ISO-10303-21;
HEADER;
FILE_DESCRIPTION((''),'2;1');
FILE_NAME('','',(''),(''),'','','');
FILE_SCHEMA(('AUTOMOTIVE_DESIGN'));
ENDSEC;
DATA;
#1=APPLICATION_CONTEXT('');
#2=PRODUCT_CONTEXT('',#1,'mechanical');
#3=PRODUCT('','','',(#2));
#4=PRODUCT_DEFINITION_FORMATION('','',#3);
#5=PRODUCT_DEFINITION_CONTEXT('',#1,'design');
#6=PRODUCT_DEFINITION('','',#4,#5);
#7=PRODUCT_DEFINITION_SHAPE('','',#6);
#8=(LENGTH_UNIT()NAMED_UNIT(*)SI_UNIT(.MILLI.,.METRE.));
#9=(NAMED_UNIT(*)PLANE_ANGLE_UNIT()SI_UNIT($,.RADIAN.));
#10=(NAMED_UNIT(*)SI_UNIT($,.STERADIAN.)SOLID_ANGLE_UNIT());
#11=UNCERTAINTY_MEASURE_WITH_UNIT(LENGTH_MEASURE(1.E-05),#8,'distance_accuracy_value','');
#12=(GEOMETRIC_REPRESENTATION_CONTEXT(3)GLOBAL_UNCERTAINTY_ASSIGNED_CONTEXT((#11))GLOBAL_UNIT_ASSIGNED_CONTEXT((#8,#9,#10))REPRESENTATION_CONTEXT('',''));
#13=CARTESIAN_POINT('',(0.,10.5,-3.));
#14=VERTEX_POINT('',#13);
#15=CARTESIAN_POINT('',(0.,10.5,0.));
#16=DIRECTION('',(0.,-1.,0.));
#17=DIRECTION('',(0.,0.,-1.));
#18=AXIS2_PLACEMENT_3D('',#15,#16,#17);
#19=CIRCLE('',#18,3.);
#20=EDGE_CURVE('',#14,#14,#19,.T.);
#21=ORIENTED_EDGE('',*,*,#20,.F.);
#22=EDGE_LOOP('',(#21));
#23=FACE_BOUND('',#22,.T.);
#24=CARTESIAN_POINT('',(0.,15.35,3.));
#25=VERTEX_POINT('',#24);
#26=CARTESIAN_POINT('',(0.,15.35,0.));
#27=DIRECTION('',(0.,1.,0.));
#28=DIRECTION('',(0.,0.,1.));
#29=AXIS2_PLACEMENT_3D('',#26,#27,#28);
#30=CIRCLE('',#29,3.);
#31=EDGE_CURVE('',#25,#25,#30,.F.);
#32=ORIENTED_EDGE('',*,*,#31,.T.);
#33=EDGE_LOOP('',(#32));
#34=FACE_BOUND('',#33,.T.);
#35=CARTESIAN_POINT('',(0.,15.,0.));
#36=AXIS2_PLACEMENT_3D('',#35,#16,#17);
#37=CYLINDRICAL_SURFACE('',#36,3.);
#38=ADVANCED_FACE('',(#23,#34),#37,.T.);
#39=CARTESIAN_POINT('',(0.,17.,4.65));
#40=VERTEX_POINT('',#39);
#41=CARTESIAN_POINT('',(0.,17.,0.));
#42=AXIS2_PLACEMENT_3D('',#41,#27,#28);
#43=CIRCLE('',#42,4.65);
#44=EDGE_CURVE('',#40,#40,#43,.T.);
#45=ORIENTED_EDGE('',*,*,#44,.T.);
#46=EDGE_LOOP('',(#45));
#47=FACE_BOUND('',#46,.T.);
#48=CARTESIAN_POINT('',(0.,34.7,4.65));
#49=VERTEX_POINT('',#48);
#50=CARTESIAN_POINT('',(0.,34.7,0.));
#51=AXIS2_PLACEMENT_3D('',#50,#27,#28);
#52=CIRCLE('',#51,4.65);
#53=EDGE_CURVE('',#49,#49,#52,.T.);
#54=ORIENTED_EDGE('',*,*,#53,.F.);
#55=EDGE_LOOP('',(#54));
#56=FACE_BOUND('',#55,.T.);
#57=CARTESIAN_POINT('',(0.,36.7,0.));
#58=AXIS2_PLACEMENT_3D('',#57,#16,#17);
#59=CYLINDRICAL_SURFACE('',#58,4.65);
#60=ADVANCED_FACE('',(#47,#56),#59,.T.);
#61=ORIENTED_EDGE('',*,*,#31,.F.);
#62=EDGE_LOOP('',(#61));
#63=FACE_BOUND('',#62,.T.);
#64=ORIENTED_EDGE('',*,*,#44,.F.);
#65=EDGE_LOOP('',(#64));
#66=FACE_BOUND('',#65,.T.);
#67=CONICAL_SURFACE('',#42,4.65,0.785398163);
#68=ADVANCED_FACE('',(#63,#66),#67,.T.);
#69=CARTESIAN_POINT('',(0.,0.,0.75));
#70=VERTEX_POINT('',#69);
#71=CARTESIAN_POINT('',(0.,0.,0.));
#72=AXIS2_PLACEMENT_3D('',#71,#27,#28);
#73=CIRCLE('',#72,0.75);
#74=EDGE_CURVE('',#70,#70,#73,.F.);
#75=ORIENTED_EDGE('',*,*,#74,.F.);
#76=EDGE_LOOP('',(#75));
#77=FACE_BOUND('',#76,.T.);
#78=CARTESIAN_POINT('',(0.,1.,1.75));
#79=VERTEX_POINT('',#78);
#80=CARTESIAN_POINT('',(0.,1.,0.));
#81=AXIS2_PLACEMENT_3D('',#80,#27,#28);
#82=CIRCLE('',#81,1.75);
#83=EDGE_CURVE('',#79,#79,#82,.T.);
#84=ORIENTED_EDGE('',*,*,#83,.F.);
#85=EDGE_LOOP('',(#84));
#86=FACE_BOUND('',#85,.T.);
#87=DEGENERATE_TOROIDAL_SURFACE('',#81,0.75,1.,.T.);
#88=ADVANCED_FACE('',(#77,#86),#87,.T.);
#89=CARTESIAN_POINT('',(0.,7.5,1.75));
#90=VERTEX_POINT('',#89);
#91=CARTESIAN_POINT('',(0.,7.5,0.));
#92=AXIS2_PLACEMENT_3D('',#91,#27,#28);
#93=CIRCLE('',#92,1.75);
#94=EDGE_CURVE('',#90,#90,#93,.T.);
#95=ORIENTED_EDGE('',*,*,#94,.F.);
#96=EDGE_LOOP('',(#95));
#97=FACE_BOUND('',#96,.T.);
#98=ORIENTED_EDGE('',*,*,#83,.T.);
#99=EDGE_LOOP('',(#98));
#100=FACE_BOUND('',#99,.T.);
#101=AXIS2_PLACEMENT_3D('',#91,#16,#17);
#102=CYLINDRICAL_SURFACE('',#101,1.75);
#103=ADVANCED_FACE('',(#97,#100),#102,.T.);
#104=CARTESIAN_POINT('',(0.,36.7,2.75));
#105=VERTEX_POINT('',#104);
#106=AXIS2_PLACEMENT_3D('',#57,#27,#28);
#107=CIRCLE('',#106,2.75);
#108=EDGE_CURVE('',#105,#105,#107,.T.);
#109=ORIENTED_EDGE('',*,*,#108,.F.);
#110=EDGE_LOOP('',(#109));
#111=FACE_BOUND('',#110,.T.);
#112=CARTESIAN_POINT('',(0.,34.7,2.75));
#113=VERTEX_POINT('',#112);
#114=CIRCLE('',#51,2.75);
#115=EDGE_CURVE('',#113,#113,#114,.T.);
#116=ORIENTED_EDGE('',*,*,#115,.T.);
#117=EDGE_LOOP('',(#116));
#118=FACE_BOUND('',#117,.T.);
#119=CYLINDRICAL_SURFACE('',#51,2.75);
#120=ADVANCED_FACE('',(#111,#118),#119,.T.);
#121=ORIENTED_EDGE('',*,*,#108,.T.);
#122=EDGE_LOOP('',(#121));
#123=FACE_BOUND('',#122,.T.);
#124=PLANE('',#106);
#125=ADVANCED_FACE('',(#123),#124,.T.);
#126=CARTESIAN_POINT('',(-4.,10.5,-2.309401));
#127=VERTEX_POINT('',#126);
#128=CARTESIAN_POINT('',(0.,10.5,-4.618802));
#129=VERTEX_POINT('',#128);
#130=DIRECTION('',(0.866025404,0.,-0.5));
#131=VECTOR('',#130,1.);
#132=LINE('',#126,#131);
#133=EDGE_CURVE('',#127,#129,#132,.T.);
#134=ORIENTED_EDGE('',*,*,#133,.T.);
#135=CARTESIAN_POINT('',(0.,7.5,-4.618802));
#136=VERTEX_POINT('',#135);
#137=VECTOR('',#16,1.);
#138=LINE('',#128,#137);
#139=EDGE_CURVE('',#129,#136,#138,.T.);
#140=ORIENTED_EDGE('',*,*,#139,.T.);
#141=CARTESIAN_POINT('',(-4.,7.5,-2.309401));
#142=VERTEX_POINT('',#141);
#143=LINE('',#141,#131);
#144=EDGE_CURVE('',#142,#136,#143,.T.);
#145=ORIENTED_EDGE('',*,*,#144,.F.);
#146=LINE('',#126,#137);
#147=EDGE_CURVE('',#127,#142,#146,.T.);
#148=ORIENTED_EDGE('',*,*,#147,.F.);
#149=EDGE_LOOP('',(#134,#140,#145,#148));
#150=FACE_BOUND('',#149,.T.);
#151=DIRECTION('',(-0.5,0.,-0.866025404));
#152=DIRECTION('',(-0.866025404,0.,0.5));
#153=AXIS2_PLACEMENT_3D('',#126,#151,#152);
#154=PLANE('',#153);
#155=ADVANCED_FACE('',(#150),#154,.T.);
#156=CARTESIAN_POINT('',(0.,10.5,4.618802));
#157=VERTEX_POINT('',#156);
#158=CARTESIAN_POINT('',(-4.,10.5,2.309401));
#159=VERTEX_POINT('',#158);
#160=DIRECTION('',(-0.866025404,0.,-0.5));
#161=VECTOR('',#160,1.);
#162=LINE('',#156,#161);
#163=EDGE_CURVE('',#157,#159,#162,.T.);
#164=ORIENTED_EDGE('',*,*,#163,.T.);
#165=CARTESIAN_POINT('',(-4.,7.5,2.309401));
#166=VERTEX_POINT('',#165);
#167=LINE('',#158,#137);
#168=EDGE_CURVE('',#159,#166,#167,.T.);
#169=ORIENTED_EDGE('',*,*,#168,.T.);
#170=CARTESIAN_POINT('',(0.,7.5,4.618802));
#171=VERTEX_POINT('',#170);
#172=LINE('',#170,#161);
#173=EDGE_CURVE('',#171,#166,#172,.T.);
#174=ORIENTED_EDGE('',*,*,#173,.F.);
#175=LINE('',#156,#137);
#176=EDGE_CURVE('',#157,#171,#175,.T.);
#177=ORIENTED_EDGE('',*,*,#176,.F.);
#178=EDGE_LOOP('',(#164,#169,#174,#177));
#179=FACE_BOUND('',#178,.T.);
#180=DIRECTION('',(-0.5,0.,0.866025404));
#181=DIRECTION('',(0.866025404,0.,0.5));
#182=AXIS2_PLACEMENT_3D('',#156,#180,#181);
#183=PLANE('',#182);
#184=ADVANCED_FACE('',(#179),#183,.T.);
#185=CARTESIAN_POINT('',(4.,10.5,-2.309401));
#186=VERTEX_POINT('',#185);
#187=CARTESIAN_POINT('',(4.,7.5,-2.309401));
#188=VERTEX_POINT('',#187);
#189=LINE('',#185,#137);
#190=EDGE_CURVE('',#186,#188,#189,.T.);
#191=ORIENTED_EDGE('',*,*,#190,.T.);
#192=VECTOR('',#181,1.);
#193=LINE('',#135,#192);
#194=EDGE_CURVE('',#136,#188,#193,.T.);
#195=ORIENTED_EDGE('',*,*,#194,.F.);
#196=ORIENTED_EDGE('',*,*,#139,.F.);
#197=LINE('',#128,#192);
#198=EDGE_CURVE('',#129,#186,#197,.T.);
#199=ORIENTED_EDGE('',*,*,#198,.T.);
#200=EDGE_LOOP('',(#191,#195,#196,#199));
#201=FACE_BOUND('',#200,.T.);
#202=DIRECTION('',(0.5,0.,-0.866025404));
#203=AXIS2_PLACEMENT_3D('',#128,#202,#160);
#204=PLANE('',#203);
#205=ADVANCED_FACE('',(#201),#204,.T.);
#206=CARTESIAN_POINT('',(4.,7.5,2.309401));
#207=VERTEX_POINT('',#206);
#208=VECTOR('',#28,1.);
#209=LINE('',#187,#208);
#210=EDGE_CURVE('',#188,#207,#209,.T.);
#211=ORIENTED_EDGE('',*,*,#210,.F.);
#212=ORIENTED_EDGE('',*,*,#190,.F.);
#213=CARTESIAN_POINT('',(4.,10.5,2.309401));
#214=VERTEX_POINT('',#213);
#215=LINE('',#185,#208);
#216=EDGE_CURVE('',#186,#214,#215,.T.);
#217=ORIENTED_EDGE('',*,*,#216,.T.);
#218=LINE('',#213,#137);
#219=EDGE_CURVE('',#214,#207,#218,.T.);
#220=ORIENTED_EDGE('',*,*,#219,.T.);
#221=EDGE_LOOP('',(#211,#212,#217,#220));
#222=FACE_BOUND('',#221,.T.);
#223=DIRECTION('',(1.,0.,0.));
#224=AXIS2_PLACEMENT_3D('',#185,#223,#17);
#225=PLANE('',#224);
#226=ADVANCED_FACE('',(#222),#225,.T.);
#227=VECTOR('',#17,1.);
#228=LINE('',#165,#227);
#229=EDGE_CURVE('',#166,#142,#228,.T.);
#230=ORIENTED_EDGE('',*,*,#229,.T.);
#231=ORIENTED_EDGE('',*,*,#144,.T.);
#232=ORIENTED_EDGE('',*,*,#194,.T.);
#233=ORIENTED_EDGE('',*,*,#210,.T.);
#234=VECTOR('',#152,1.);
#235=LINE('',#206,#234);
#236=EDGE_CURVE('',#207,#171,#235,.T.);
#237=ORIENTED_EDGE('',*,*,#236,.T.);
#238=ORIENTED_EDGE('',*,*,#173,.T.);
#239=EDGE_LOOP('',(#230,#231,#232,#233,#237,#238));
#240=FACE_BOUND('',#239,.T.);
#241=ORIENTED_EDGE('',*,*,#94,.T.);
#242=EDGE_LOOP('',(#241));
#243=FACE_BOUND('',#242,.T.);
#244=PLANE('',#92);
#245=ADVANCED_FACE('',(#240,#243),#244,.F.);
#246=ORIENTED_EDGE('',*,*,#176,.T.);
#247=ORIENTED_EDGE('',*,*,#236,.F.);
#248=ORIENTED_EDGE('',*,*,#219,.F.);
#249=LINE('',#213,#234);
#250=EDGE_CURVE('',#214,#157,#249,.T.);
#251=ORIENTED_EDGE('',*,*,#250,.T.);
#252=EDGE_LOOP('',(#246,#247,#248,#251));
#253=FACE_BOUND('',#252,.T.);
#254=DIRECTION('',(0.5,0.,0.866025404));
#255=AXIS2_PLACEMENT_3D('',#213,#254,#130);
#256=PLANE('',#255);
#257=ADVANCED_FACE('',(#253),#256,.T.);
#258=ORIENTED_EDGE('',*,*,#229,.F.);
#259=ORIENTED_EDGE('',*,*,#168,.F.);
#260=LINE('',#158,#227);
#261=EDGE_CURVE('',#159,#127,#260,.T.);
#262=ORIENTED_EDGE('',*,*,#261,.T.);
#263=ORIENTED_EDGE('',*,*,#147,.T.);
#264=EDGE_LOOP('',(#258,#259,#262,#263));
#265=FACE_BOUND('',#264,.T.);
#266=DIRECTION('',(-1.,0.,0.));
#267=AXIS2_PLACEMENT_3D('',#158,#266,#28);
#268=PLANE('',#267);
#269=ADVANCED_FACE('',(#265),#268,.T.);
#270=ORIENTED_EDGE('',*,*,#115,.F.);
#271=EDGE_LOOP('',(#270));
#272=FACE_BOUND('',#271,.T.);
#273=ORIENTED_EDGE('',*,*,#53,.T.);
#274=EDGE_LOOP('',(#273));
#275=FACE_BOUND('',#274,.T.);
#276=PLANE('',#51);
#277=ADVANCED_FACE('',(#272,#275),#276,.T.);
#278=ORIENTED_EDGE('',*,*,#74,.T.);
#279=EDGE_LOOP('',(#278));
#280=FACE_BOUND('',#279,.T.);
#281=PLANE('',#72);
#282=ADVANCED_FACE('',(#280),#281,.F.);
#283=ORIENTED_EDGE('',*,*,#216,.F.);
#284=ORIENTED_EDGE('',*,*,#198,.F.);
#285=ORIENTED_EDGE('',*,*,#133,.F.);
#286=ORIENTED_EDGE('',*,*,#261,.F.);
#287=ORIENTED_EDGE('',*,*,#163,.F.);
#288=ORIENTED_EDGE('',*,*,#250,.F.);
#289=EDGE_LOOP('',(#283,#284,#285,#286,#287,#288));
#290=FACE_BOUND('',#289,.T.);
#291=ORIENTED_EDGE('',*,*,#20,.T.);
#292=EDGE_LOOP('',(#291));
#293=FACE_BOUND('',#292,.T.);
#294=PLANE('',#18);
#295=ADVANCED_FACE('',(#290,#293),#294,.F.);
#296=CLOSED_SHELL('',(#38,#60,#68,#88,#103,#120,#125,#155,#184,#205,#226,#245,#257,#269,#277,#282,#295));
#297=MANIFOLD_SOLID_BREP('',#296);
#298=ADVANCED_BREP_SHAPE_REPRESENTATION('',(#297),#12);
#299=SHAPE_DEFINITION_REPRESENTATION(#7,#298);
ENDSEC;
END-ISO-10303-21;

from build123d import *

# Parameters (mm, degrees)
SKETCH_1_R          = 1.75
EXTRUDE_1_DEPTH     = 7.5
SKETCH_2_R          = 3
EXTRUDE_2_DEPTH     = 7.5
SKETCH_3_R          = 4.65
EXTRUDE_3_DEPTH     = 21.7
FILLET_1_R          = 1
EXTRUDE_4_DEPTH     = 3
CUT_EXTRUDE_START   = -2
SKETCH_5_R          = 4.65
SKETCH_5_R_2        = 2.75
CUT_EXTRUDE_1_DEPTH = 2
CHAMFER_1_SIZE      = 2


with BuildPart() as part:
    # 草图1 → 凸台-拉伸1 (new body)
    with BuildSketch(Plane(origin=(0, 0, 0), x_dir=(1, 0, 0), z_dir=(0, 1, 0))):
        with Locations(Location((0, 0, 0), (0, 0, 270))):
            Circle(SKETCH_1_R)
    extrude(amount=EXTRUDE_1_DEPTH)

    # 草图2 → 凸台-拉伸2 (add)
    with BuildSketch(Plane(origin=(0, 7.5, 0), x_dir=(1, 0, 0), z_dir=(0, 1, 0))):
        with Locations(Location((0, 0, 0), (0, 0, 270))):
            Circle(SKETCH_2_R)
    extrude(amount=EXTRUDE_2_DEPTH)

    # 草图3 → 凸台-拉伸3 (add)
    with BuildSketch(Plane(origin=(0, 15, 0), x_dir=(1, 0, 0), z_dir=(0, 1, 0))):
        with Locations(Location((0, 0, 0), (0, 0, 270))):
            Circle(SKETCH_3_R)
    extrude(amount=EXTRUDE_3_DEPTH)

    # 圆角1
    fillet_1_edges = [part.edges().sort_by_distance(p)[0] for p in [
        (0, 0, -1.75),
    ]]
    fillet(fillet_1_edges, radius=FILLET_1_R)

    # 草图4 → 凸台-拉伸4 (add)
    with BuildSketch(Plane.XZ.offset(-7.5)):
        Polygon((0, 4.618802154), (-4, 2.309401077), (-4, -2.309401077), (0, -4.618802154), (4, -2.309401077), (4, 2.309401077), align=None)
    extrude(amount=-EXTRUDE_4_DEPTH)

    # 草图5 → 切除-拉伸1 (cut)
    with BuildSketch(Plane(origin=(0, 36.7, 0), x_dir=(1, 0, 0), z_dir=(0, 1, 0)).offset(CUT_EXTRUDE_START)):
        with Locations(Location((0, 0, 0), (0, 0, 270))):
            Circle(SKETCH_5_R)
        with Locations(Location((0, 0, 0), (0, 0, 270))):
            Circle(SKETCH_5_R_2, mode=Mode.SUBTRACT)
    extrude(amount=CUT_EXTRUDE_1_DEPTH, mode=Mode.SUBTRACT)

    # 倒角1
    # the kernel refuses this chamfer: 2 mm, written as the material it takes off along each edge
    with BuildSketch(Plane(origin=(0, 15, 0), x_dir=(0, 0, 1), z_dir=(-1, 0, 0))) as chamfer_1_piece_1_section:
        Polygon((4.65 - CHAMFER_1_SIZE, 0), (4.65, CHAMFER_1_SIZE), (4.65, 0), align=None)
    chamfer_1_piece_1 = revolve(axis=Axis((0, 15, 0), (0, 1, 0)), mode=Mode.PRIVATE)
    chamfer_1_piece_1 = chamfer_1_piece_1 - Plane(origin=(0, 16.176636647, 0), x_dir=(0, 0, 1), z_dir=(0, -1, 0)) * Cylinder(3, 19, mode=Mode.PRIVATE)
    add(chamfer_1_piece_1, mode=Mode.SUBTRACT)


solid = part.part
